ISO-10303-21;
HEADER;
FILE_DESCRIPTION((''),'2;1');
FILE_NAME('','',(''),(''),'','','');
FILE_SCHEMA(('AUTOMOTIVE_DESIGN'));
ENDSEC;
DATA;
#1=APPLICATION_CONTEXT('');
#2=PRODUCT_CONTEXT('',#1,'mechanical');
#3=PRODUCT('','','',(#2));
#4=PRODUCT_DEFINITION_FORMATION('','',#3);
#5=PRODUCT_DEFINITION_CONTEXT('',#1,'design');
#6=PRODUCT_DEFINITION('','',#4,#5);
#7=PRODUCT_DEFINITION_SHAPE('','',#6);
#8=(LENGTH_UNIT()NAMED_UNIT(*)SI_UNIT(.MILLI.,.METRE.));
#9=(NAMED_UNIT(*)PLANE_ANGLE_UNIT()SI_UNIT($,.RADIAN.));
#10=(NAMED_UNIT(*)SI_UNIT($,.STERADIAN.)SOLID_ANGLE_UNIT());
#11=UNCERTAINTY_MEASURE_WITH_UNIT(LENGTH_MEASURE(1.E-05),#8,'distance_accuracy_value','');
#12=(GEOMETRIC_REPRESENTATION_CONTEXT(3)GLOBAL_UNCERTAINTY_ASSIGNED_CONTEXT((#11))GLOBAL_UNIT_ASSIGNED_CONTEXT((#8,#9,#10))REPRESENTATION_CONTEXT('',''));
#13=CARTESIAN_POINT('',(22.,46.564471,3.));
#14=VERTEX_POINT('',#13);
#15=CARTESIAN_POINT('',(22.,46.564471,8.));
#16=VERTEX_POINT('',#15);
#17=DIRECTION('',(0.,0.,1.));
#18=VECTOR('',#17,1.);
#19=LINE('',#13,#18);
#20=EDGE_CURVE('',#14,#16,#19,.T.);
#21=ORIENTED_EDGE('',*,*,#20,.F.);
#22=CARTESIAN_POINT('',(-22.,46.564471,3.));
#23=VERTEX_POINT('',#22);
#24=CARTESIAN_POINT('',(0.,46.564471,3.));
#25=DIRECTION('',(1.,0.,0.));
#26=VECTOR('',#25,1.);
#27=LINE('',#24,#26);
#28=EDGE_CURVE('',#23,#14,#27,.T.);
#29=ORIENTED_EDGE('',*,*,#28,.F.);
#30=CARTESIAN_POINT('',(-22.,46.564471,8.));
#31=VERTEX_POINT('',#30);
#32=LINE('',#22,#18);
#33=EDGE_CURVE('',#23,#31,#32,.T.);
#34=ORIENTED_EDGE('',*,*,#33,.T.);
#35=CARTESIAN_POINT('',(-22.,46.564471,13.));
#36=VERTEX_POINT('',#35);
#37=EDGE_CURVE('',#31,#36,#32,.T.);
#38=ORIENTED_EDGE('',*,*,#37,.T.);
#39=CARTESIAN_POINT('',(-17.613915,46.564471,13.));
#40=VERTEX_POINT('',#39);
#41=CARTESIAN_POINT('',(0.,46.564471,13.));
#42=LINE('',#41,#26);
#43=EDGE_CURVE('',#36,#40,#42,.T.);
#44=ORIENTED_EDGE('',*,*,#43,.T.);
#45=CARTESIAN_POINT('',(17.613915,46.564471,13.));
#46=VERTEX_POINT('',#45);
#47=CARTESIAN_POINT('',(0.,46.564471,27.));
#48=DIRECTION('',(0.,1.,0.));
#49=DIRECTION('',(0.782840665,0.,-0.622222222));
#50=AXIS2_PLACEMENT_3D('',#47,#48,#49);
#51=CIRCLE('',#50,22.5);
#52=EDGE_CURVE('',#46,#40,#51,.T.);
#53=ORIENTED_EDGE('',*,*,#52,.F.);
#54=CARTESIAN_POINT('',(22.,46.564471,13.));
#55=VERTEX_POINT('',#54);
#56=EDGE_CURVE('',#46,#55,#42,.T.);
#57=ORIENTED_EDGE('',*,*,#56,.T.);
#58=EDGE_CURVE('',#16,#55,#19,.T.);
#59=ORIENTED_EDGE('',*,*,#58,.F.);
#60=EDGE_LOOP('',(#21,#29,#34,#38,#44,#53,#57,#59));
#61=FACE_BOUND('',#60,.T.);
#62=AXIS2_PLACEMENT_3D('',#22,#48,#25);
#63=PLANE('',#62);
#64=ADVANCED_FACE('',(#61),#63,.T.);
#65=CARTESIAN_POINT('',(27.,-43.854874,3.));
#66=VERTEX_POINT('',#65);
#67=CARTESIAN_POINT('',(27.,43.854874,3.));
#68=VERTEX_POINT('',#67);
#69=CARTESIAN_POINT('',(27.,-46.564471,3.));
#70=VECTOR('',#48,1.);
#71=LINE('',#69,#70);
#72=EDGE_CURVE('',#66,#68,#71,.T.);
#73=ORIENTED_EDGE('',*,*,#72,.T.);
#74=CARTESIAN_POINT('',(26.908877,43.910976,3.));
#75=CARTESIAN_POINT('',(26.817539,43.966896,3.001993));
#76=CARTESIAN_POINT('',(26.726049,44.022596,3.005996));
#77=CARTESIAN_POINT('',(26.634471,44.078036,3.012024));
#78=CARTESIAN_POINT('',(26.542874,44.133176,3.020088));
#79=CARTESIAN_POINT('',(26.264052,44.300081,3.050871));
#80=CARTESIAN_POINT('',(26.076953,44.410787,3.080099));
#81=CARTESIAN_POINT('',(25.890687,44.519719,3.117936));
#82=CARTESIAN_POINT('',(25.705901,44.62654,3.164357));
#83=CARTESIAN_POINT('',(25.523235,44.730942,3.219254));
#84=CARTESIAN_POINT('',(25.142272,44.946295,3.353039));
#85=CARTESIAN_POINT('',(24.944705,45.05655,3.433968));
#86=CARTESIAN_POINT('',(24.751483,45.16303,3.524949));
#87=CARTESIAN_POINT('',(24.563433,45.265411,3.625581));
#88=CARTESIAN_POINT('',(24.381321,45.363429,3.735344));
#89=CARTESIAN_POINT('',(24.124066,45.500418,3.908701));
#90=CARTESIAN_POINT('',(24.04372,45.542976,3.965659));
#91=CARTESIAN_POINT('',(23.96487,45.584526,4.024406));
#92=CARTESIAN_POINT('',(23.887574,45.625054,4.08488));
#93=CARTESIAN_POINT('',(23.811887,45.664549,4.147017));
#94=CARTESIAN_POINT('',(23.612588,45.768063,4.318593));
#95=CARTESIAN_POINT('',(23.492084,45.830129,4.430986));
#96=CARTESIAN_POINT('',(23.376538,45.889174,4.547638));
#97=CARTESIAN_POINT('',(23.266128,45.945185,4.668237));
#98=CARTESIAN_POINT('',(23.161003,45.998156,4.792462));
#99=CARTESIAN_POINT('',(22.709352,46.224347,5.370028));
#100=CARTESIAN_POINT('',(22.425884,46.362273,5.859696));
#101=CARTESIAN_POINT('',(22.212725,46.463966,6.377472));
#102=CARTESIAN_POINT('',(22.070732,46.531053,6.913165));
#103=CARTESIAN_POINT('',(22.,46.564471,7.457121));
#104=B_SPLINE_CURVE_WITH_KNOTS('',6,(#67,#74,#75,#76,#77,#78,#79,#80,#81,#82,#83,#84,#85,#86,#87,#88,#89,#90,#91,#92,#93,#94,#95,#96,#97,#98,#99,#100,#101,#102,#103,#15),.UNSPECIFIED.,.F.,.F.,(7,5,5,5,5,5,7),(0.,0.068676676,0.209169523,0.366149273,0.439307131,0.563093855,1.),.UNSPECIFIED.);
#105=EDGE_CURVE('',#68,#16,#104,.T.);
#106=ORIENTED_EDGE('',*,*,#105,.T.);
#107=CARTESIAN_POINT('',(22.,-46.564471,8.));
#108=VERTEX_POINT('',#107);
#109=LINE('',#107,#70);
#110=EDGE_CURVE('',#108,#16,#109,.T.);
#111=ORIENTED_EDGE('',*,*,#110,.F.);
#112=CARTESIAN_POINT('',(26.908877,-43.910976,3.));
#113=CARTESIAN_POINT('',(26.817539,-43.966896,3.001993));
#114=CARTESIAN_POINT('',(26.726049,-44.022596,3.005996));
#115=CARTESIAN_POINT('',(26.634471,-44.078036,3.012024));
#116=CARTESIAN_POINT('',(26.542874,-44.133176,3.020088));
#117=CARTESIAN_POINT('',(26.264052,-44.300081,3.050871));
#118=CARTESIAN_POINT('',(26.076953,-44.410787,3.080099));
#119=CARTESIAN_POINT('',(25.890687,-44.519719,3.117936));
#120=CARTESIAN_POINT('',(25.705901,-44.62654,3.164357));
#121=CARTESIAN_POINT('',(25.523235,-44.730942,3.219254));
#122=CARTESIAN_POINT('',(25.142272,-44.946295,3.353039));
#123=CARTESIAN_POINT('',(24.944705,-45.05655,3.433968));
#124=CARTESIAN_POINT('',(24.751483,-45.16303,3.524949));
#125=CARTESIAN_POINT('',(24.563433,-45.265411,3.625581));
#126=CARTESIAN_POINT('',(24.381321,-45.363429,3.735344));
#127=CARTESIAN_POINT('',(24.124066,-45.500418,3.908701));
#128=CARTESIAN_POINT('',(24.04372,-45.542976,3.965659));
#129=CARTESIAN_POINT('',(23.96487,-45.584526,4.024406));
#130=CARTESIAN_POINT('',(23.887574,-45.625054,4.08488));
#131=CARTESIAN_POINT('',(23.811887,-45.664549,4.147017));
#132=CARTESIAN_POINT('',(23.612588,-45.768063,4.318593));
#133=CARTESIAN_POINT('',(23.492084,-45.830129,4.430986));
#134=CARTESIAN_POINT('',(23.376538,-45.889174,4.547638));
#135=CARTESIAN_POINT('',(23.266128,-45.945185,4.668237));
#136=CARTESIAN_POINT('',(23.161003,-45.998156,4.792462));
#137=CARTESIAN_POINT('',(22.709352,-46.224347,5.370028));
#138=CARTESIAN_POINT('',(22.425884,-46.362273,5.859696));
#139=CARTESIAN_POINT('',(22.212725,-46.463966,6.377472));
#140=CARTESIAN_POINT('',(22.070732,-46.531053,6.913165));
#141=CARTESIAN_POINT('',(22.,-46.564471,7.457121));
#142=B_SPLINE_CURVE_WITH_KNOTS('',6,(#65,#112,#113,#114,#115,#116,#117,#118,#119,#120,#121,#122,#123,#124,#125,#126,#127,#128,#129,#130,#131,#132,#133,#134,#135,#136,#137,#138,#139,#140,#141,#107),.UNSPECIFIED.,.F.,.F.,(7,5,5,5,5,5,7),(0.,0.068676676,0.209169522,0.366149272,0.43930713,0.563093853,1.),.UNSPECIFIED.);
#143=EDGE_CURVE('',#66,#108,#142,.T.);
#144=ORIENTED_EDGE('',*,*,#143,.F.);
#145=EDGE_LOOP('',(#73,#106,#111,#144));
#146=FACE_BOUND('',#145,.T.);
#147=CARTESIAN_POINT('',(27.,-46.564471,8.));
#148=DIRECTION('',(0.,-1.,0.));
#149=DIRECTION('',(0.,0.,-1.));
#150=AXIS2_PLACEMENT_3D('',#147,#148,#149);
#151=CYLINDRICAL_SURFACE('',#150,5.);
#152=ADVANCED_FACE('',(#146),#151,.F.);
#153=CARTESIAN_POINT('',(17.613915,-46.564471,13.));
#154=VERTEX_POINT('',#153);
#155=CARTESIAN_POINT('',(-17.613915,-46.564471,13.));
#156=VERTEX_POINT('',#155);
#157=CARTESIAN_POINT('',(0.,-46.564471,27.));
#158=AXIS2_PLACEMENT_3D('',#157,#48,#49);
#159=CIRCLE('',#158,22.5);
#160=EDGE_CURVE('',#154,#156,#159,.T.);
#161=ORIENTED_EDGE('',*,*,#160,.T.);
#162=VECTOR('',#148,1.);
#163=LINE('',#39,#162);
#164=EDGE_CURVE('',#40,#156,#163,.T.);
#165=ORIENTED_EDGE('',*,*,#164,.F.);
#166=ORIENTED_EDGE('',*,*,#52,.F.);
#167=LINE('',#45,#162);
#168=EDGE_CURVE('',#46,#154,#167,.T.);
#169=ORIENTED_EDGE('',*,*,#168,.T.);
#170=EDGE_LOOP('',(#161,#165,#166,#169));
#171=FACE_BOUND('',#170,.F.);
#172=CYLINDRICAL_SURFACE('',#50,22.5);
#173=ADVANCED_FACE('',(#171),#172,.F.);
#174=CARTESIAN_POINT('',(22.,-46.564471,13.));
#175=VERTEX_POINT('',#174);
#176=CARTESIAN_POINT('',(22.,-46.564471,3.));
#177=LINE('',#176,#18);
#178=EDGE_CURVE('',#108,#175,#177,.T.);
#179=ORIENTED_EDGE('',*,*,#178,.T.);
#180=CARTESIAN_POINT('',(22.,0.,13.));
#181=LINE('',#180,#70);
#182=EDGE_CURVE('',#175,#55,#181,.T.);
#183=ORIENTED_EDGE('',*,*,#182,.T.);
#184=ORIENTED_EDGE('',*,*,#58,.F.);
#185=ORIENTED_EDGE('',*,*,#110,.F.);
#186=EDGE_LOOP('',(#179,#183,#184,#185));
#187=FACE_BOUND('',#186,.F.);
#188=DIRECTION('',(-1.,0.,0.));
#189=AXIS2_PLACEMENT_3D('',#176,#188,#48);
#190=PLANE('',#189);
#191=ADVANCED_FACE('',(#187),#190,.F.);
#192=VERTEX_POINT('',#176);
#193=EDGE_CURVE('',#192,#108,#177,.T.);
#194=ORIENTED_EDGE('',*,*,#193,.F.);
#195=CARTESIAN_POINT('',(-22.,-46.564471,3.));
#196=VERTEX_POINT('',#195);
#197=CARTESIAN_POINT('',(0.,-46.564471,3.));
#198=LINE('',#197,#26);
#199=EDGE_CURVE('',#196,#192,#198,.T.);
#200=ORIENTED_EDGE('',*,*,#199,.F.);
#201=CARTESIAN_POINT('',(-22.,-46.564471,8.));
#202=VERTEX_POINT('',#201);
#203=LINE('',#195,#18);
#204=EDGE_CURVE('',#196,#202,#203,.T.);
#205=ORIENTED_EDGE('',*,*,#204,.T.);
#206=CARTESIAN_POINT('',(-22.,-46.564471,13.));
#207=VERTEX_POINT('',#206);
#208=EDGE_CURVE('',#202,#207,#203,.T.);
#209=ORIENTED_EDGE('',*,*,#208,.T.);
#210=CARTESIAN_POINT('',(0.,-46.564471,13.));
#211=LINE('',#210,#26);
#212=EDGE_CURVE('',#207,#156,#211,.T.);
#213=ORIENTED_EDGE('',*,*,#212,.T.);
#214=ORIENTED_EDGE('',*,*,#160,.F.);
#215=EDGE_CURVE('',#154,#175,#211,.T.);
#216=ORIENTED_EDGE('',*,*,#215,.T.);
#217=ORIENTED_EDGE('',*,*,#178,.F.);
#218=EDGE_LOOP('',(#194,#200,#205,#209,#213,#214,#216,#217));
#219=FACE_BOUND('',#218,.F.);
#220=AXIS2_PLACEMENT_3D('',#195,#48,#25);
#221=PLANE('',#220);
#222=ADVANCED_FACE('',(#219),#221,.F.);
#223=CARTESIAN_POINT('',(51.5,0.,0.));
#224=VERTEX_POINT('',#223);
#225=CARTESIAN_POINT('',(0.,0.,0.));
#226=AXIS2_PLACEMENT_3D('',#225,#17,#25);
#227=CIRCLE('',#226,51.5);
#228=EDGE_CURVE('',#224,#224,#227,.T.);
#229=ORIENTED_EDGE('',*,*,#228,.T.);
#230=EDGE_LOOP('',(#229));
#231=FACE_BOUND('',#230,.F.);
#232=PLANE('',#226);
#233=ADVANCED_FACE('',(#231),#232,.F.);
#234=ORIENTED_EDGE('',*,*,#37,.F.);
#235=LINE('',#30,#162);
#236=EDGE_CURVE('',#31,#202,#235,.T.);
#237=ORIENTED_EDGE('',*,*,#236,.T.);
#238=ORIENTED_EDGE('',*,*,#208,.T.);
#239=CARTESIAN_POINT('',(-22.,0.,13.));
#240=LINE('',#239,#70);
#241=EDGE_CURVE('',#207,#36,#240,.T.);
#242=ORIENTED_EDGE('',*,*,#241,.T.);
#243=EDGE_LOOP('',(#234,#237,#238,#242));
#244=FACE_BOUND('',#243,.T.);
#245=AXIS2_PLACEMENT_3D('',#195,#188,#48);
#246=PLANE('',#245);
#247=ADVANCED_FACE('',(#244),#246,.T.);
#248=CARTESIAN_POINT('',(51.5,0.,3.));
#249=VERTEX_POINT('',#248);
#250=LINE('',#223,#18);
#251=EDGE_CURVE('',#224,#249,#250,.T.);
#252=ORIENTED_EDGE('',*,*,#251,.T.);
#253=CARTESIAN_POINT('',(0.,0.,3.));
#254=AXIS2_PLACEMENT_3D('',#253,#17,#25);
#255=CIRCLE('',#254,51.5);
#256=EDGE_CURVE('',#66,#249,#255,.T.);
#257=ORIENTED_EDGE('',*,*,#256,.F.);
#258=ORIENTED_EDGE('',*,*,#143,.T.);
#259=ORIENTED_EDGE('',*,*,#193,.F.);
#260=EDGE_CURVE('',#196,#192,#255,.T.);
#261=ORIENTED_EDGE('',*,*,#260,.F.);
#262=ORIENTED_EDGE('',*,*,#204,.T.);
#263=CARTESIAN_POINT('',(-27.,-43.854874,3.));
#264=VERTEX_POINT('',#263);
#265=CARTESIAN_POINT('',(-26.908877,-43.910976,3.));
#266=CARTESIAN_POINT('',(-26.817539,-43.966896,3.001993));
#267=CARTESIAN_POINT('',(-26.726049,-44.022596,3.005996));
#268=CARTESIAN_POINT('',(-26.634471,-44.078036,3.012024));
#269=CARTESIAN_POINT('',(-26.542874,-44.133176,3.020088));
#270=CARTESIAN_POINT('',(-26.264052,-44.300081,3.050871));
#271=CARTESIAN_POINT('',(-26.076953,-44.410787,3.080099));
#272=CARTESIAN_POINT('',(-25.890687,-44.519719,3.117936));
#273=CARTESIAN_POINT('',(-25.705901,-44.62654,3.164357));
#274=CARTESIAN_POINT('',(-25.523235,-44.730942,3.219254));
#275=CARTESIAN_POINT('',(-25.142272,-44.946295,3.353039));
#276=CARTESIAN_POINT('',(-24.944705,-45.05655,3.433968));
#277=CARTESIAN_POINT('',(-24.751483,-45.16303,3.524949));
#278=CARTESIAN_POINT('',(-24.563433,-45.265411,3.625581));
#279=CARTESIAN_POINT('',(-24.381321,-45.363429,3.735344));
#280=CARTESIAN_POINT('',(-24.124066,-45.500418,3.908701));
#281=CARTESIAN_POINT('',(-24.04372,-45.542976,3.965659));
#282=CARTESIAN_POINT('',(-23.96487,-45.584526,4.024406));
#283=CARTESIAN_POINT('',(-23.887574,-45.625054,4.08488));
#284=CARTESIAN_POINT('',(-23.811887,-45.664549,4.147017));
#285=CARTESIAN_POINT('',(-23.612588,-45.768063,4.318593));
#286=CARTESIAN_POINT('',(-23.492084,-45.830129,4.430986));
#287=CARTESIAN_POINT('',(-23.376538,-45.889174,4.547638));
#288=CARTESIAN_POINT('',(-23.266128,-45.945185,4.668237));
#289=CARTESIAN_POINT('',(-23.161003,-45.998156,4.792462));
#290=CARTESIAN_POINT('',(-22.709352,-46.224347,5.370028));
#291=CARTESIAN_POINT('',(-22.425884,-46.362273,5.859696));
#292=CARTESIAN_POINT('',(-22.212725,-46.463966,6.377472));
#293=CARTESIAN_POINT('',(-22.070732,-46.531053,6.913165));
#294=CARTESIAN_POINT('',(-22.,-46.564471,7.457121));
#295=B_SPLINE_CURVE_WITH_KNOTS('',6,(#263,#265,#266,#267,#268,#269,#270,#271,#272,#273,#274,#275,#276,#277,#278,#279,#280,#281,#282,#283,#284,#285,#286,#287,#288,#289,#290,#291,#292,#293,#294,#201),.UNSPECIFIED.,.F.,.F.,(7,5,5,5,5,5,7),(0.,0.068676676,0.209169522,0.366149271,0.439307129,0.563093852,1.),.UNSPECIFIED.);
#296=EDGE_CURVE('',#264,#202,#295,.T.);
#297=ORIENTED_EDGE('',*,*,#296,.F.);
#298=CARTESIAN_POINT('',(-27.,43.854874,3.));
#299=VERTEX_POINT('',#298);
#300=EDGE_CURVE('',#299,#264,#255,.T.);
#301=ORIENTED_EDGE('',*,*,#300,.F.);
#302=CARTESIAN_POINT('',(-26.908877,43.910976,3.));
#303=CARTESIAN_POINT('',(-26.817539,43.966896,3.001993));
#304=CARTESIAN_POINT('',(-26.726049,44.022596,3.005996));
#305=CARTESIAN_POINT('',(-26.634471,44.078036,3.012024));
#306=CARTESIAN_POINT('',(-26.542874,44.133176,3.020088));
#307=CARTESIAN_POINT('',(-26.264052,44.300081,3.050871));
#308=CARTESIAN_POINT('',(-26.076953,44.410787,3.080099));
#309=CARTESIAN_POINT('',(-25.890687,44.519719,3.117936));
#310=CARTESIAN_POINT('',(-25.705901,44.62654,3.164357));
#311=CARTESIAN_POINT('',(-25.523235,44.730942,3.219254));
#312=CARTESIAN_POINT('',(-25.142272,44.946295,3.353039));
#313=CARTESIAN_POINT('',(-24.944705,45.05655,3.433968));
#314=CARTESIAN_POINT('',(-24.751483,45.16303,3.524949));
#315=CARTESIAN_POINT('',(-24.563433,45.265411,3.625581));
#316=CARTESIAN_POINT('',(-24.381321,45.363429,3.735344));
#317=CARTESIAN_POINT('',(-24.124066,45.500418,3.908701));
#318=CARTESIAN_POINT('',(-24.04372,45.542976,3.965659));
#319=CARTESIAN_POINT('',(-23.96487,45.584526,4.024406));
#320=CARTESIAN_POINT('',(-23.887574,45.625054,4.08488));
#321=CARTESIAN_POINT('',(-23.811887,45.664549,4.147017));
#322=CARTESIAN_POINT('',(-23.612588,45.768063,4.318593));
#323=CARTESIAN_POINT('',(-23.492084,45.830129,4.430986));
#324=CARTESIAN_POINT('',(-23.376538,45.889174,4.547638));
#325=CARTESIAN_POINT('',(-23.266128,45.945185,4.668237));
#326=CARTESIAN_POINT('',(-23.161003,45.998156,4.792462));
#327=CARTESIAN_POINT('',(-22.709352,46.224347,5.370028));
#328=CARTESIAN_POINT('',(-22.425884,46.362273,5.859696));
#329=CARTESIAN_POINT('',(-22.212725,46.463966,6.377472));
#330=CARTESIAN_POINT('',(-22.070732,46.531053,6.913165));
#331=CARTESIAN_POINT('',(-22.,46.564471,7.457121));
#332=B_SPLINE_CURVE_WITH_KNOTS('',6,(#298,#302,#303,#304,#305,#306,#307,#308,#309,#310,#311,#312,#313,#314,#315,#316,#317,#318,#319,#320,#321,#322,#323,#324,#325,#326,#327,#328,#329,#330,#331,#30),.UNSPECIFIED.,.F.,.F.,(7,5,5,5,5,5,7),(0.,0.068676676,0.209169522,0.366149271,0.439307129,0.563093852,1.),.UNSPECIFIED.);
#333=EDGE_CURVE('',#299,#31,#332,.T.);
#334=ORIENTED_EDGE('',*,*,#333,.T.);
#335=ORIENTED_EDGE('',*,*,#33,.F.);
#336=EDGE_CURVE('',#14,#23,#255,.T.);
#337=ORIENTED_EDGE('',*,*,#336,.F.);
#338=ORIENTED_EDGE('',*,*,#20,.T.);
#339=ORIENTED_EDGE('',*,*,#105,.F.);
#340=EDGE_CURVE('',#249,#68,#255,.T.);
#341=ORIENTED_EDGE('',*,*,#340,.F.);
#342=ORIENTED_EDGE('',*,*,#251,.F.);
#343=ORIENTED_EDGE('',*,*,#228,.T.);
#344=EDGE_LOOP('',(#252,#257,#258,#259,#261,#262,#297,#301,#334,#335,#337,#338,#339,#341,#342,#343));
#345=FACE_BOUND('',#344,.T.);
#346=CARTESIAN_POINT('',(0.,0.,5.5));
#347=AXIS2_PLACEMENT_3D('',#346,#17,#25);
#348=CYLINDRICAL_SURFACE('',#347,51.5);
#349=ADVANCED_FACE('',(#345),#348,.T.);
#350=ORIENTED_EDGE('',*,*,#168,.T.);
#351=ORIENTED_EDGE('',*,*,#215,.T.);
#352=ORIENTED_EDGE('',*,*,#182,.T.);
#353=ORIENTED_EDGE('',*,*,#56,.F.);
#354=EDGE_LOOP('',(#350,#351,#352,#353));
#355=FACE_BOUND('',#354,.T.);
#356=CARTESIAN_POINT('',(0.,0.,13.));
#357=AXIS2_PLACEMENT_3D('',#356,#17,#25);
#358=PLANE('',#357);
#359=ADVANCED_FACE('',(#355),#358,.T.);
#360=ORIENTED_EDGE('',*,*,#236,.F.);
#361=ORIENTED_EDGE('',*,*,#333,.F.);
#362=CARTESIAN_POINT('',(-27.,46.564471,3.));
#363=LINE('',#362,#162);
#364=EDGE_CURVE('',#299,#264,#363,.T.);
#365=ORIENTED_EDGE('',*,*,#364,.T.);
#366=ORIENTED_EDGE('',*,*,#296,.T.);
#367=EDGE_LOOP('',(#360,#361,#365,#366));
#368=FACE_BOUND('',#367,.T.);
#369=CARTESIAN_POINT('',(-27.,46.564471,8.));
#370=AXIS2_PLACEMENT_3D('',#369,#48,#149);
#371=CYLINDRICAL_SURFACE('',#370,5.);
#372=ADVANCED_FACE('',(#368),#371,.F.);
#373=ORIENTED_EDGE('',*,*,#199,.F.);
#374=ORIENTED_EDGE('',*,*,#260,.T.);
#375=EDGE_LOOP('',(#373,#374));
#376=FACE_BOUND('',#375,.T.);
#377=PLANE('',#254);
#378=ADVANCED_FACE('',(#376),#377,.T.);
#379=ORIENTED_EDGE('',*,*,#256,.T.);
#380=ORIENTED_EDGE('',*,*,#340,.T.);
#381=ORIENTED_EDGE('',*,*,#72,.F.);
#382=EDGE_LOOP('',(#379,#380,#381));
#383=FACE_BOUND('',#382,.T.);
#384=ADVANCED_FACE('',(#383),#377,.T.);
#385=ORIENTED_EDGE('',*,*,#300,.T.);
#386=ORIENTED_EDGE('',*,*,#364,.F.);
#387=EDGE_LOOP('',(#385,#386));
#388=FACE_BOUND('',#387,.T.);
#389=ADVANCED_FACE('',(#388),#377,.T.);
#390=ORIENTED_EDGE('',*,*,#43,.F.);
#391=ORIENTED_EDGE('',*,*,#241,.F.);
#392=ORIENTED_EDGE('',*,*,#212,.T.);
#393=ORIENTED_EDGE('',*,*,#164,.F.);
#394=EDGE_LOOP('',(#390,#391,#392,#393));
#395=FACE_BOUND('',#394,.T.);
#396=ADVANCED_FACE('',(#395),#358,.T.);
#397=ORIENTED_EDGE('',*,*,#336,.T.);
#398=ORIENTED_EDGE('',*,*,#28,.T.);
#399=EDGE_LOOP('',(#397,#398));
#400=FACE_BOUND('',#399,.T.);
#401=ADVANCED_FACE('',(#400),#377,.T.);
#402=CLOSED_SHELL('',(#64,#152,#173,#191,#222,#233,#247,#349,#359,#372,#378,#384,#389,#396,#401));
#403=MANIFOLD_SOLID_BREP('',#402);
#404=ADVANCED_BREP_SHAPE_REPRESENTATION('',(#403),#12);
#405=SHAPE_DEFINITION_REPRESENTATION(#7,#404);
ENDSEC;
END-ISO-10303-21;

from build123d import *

# Parameters (mm, degrees)
F0_R        = 51.5
F1_DEPTH    = 3
F2_W        = 44
F2_H        = 93.1289428696
F3_DEPTH    = 10
F5_DEPTH    = 93.1289428696
F6_T4_DEPTH = 93.1289428696
F6_S5_R     = 51.5
F6_T6_DEPTH = 48
F7_T4_DEPTH = 93.1289428696
F7_S5_R     = 51.5
F7_T6_DEPTH = 48


# Not quite as in the source:
# - a fillet or chamfer that OpenCascade refuses, or shapes differently, is made with other operations: its cross-section is extruded or revolved along the edge and cut away or added


with BuildPart() as f1:
    # F0 (on Top) → F1 (new body)
    with BuildSketch(Plane.XY):
        Circle(F0_R)
    extrude(amount=F1_DEPTH)

    # F2 (on face) → F3 (join)
    with BuildSketch(Plane.XY.offset(3)):
        Rectangle(F2_W, F2_H)
    extrude(amount=F3_DEPTH)

    # F4 (on face) → F5 (cut, through all)
    with BuildSketch(Plane(origin=(0, 46.5644714348, 0), x_dir=(-1, 0, 0), z_dir=(0, 1, 0))):
        with BuildLine():
            Line((17.6139149538, 13), (-17.6139149538, 13))
            ThreePointArc((-17.6139149538, 13), (0, 4.5), (17.6139149538, 13))
        make_face()
    extrude(amount=-F5_DEPTH, mode=Mode.SUBTRACT)

    # F6: fillet of radius 5 on 1 edges, made by hand


with BuildPart() as f6_tool2:
    # F6_s3 → F6_t4 (new body)
    with BuildSketch(Plane.XZ.offset(-46.5644714348)):
        with BuildLine():
            ThreePointArc((-27, 3), (-23.4644660941, 4.4644660941), (-22, 8))
            Line((-22, 8), (-22, 3))
            Line((-22, 3), (-27, 3))
        make_face()
    extrude(amount=F6_T4_DEPTH)

    # F6_s5 → F6_t6 (intersect, symmetric)
    with BuildSketch(Plane.XY.offset(5.5)):
        Circle(F6_S5_R)
    extrude(amount=F6_T6_DEPTH, both=True, mode=Mode.INTERSECT)


with BuildPart() as f1_1:
    add(f1.part)

    # F6_t1: union F6_tool2
    add(f6_tool2.part)

    # F7: fillet of radius 5 on 1 edges, made by hand


with BuildPart() as f7_tool2:
    # F7_s3 → F7_t4 (new body)
    with BuildSketch(Plane.XZ.offset(46.5644714348)):
        with BuildLine():
            ThreePointArc((27, 3), (23.4644660941, 4.4644660941), (22, 8))
            Line((22, 8), (22, 3))
            Line((22, 3), (27, 3))
        make_face()
    extrude(amount=-F7_T4_DEPTH)

    # F7_s5 → F7_t6 (intersect, symmetric)
    with BuildSketch(Plane.XY.offset(5.5)):
        Circle(F7_S5_R)
    extrude(amount=F7_T6_DEPTH, both=True, mode=Mode.INTERSECT)


with BuildPart() as f1_2:
    add(f1_1.part)

    # F7_t1: union F7_tool2
    add(f7_tool2.part)


solid = f1_2.part
